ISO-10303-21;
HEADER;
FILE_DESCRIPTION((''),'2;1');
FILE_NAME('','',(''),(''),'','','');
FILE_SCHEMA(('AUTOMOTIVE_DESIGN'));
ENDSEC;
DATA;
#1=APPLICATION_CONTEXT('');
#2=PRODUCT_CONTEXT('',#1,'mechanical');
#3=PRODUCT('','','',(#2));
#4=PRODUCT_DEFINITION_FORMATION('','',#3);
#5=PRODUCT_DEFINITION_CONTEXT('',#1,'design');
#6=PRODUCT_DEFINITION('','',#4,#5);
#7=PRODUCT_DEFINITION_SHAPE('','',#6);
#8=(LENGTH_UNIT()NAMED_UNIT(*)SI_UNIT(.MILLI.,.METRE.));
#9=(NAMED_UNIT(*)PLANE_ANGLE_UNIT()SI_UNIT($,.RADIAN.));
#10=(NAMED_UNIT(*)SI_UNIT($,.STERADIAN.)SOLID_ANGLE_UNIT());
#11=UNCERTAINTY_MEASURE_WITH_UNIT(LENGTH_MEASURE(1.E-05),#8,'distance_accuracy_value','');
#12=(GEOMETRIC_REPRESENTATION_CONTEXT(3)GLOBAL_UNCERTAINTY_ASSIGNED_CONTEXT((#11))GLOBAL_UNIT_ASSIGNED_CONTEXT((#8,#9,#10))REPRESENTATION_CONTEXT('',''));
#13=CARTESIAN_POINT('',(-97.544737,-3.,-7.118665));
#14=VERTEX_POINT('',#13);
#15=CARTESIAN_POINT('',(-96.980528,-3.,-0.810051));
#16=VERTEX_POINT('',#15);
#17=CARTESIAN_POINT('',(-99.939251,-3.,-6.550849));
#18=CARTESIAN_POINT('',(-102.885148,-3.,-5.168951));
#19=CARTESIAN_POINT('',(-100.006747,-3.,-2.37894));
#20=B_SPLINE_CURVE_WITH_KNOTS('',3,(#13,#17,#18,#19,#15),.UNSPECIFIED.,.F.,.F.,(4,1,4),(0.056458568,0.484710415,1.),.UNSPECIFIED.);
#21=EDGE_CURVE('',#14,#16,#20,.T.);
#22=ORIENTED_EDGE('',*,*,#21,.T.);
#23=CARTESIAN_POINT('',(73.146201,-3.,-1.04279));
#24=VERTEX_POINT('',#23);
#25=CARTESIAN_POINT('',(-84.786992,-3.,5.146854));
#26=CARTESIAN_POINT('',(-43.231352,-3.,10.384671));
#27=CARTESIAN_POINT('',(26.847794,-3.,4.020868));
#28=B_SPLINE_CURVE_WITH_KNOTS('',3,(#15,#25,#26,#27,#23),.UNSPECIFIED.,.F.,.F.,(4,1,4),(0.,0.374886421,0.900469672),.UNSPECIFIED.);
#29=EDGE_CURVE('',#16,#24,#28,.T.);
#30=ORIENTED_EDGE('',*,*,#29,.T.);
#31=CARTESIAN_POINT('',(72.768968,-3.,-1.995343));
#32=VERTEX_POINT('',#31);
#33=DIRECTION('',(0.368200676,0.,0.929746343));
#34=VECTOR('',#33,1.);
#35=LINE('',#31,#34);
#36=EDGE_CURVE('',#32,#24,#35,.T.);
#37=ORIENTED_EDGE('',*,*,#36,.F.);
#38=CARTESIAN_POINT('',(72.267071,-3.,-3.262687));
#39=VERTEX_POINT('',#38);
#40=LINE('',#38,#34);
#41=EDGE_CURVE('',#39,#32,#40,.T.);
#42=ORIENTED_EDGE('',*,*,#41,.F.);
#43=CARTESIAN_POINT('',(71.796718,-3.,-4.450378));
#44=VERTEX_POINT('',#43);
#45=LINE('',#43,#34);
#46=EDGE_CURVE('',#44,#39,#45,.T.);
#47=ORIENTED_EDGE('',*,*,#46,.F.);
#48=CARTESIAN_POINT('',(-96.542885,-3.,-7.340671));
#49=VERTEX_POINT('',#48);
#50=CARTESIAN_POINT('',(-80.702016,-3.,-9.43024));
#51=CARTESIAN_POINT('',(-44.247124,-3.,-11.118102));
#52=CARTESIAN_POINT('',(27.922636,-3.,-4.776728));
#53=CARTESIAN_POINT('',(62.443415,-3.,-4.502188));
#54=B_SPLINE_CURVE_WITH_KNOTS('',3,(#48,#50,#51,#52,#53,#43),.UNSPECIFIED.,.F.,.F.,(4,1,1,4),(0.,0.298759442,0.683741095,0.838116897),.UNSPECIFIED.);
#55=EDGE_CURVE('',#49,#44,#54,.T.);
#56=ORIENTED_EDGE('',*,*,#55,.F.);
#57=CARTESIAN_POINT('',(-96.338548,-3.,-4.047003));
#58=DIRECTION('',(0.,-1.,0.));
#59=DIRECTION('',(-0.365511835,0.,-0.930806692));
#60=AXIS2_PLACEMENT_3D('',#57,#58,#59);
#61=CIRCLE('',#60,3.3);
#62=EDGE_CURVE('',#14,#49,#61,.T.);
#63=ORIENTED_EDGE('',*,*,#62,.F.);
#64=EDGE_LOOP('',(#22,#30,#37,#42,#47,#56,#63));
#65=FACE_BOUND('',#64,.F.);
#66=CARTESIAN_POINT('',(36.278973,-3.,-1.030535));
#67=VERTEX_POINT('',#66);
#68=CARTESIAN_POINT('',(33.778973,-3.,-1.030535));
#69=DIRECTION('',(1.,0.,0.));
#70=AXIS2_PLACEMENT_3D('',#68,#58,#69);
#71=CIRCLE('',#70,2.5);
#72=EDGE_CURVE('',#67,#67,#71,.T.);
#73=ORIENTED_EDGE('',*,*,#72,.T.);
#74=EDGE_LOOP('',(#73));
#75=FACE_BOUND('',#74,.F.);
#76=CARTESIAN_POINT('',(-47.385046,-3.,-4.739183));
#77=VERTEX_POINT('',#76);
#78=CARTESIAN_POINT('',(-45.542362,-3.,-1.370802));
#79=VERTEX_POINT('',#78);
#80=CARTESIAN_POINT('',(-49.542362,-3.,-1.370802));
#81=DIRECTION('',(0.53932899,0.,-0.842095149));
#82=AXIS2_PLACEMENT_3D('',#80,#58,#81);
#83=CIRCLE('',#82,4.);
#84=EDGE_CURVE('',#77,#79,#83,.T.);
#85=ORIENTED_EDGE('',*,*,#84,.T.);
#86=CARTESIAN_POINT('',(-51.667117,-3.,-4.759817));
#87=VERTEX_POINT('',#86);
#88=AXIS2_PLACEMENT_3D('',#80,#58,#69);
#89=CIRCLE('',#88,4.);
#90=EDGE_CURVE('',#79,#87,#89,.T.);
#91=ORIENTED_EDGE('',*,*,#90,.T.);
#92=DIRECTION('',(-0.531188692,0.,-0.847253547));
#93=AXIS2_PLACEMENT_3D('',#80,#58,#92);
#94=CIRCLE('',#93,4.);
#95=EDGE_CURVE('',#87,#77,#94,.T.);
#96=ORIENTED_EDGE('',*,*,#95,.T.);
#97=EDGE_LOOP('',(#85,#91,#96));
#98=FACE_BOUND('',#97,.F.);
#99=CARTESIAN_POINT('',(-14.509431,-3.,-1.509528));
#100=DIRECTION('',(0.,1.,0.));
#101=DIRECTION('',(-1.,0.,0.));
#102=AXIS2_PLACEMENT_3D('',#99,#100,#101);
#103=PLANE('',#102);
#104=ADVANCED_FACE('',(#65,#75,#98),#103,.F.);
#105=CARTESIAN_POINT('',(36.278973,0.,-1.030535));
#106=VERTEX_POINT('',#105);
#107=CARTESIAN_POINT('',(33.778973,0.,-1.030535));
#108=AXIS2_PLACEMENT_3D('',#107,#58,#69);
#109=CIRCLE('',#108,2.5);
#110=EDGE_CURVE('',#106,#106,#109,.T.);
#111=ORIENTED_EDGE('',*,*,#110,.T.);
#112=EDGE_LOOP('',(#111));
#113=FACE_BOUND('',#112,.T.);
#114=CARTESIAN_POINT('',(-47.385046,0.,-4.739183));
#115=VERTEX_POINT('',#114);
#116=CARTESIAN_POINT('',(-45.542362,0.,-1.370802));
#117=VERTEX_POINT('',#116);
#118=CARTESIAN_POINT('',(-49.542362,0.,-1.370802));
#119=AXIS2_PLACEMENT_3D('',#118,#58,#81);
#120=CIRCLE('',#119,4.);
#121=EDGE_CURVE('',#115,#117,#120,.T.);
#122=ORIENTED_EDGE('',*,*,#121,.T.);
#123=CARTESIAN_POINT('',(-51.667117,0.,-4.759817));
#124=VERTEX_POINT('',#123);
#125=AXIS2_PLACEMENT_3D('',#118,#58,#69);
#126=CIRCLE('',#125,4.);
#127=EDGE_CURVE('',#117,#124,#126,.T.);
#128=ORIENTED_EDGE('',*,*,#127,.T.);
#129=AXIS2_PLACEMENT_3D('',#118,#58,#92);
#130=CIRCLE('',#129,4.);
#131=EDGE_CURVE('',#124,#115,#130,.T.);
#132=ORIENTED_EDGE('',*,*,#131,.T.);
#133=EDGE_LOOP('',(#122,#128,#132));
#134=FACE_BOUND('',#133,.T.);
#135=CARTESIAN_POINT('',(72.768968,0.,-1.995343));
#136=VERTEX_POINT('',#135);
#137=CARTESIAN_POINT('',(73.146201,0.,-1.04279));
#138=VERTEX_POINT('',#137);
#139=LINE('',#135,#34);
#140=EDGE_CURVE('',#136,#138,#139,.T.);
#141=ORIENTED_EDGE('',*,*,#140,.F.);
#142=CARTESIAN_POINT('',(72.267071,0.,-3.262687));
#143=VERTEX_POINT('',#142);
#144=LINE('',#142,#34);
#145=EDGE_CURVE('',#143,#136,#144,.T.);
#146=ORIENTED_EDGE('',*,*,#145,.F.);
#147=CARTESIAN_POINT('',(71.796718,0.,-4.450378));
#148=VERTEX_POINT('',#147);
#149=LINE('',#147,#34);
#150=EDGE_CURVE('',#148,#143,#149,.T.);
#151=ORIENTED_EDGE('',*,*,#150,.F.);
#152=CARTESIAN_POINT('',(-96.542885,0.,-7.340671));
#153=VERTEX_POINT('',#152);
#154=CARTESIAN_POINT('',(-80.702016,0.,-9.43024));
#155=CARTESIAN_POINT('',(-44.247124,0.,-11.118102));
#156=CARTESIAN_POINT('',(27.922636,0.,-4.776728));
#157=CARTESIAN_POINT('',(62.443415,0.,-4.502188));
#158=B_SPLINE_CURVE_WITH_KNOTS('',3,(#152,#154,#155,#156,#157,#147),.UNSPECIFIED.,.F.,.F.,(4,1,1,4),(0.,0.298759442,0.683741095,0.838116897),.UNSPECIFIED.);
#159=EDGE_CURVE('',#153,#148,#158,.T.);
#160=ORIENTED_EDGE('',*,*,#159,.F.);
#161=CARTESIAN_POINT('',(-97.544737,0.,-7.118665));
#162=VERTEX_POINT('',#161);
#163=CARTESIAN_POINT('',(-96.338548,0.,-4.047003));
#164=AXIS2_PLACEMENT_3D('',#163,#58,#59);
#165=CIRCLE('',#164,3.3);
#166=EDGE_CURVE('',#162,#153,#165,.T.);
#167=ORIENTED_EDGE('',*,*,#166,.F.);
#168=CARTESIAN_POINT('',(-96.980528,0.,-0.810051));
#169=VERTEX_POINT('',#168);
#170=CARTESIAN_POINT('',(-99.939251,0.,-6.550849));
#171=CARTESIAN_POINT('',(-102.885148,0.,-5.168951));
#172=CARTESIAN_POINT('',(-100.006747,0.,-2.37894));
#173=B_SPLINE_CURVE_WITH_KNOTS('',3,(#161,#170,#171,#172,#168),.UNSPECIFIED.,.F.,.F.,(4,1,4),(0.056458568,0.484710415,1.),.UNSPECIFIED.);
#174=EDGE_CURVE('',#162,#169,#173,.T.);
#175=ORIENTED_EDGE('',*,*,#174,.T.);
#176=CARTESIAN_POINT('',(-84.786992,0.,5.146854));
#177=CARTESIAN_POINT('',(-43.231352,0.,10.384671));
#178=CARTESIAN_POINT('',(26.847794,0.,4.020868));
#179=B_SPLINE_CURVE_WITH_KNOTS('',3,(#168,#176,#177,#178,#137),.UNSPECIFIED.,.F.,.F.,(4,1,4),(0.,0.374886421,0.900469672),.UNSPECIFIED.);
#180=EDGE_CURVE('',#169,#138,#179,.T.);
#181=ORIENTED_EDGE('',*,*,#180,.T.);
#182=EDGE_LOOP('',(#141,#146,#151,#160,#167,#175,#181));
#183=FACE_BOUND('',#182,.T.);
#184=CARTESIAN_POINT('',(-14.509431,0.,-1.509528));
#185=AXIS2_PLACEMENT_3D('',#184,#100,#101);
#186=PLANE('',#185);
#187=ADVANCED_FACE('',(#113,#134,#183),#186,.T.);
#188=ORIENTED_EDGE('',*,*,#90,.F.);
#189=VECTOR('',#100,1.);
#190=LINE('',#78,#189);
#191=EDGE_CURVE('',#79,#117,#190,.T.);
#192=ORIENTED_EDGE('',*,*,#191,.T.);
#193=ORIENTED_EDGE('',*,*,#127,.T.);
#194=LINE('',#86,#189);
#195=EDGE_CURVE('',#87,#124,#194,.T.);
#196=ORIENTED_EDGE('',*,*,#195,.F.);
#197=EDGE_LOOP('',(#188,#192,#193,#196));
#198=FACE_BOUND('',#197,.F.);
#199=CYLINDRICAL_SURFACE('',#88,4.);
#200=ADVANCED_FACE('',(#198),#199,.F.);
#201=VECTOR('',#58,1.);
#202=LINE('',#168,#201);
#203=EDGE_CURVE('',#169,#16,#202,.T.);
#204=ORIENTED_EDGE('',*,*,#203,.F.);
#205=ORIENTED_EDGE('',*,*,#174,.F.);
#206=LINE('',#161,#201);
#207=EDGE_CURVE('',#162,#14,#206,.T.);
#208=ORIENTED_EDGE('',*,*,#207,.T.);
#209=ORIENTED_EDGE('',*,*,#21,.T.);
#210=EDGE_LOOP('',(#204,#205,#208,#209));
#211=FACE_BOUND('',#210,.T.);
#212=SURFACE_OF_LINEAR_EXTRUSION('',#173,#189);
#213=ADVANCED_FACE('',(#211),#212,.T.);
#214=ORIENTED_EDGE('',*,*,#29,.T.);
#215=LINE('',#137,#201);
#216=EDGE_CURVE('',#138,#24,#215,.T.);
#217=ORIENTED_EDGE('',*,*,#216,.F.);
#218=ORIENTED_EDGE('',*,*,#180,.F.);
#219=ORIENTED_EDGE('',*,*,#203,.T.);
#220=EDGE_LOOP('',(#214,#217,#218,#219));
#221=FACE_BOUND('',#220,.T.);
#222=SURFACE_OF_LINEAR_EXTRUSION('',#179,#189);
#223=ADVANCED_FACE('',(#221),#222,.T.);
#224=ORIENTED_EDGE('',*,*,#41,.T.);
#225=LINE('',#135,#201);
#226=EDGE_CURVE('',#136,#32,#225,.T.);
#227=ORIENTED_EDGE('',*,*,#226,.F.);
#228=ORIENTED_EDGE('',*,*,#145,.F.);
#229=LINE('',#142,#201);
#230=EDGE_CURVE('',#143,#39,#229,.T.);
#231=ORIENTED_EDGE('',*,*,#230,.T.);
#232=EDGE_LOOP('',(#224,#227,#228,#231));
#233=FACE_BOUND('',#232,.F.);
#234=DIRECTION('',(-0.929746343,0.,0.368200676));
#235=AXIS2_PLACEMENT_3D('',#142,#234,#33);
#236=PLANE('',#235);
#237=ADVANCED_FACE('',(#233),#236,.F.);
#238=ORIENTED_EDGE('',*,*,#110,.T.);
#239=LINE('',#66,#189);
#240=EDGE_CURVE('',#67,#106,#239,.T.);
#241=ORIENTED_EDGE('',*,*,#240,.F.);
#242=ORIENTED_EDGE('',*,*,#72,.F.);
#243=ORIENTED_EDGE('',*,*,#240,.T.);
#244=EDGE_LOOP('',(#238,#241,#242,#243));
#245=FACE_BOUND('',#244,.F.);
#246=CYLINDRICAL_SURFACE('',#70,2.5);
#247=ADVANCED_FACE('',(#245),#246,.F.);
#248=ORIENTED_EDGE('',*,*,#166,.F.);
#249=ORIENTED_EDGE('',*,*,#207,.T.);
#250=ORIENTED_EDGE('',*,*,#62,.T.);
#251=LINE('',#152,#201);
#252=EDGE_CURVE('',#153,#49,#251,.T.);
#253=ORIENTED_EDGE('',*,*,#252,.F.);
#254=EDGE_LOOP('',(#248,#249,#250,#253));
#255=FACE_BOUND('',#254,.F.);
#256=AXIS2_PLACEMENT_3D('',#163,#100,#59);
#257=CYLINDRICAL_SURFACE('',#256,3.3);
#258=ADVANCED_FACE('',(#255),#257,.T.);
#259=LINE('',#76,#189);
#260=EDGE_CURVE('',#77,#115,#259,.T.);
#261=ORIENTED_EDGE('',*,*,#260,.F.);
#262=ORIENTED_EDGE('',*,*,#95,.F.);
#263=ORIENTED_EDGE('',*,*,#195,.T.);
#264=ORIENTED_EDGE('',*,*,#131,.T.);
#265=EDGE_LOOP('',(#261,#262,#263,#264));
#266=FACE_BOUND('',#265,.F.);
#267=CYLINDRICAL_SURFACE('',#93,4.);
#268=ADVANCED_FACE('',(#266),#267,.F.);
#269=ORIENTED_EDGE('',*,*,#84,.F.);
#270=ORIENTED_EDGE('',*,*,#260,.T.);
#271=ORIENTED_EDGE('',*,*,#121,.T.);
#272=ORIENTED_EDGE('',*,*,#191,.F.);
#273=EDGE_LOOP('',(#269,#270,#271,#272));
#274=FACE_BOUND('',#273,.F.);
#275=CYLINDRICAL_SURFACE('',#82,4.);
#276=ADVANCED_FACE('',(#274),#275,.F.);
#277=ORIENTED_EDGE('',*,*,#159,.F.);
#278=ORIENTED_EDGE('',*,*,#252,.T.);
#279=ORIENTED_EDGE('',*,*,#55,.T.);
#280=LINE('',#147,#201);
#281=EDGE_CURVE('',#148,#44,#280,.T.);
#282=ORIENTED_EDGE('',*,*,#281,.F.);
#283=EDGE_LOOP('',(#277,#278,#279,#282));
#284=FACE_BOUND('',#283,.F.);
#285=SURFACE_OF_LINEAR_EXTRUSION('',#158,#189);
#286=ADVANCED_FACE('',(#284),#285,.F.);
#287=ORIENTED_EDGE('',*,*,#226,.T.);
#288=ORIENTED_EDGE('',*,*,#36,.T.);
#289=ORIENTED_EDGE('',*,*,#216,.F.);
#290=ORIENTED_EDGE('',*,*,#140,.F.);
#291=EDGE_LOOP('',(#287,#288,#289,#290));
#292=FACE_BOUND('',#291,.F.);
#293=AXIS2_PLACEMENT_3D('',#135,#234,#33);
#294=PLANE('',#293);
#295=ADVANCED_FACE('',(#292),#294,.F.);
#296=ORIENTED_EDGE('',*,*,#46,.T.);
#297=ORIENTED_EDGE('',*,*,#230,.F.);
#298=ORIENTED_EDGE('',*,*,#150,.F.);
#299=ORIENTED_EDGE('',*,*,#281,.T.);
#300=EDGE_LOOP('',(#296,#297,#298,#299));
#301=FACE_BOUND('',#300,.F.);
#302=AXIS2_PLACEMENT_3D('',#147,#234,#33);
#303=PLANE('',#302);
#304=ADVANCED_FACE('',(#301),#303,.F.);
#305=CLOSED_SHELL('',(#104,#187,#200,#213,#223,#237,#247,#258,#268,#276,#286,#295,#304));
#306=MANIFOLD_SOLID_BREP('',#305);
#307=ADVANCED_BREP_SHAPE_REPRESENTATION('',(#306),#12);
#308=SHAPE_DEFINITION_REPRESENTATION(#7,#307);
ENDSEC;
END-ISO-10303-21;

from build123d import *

# Parameters (mm, degrees)
F2_DEPTH = 3
F1_R     = 2.5
F3_DEPTH = 3
F4_DEPTH = 3


with BuildPart() as f2:
    # F0 (on Front) → F2 (new body)
    with BuildSketch(Plane.XZ):
        with BuildLine():
            add(Edge.make_bspline(
                [(-96.9805282175, -0.8100506688), (-84.7869920978, 5.1468541776), (-43.2313518226, 10.3846705605), (26.8477938201, 4.0208678603), (73.1462007926, -1.0427900778)],
                knots=[0, 0, 0, 0, 0.374886421, 0.9004696716, 0.9004696716, 0.9004696716, 0.9004696716], degree=3))
            add(Edge.make_bspline(
                [(-97.5447368223, -7.1186651935), (-99.939251346, -6.5508492693), (-102.885147974, -5.168950634), (-100.0067471137, -2.3789404522), (-96.9805282175, -0.8100506688)],
                knots=[0.0564585679, 0.0564585679, 0.0564585679, 0.0564585679, 0.4847104148, 1, 1, 1, 1], degree=3))
            add(Edge.make_bspline(
                [(-96.5428845142, -7.3406707446), (-96.8949965543, -7.2673488468), (-97.22905608, -7.1935231869), (-97.5447368223, -7.1186651935)],
                knots=[0, 0, 0, 0, 0.0564585679, 0.0564585679, 0.0564585679, 0.0564585679], degree=3))
            add(Edge.make_bspline(
                [(-96.5428845142, -7.3406707446), (-80.7020161693, -9.4302402111), (-44.2471235075, -11.1181020976), (27.9226364637, -4.7767282079), (62.4434148738, -4.5021877215), (71.7967184236, -4.4503783305)],
                knots=[0, 0, 0, 0, 0.2987594418, 0.6837410955, 0.8381168975, 0.8381168975, 0.8381168975, 0.8381168975], degree=3))
            Line((71.7967184236, -4.4503783305), (72.2670713195, -3.2626866351))
            add(Edge.make_bspline(
                [(-97.3825784566, -6.0471531808), (-82.3468325761, -8.841713568), (-44.2551066449, -8.6286827794), (32.5707299039, -3.8332069517), (63.1103828262, -3.2710139005), (72.2670713195, -3.2626866351)],
                knots=[0, 0, 0, 0, 0.3131273629, 0.7122131732, 0.9019797674, 0.9019797674, 0.9019797674, 0.9019797674], degree=3))
            add(Edge.make_bspline(
                [(-97.3825784566, -6.0471531808), (-98.6588937786, -5.8946130057), (-100.1661659123, -5.1778479876), (-99.9138553768, -4.2244412327), (-99.8196757147, -4.047003109)],
                knots=[0, 0, 0, 0, 0.4440177242, 0.5425000514, 0.5425000514, 0.5425000514, 0.5425000514], degree=3))
            add(Edge.make_bspline(
                [(-99.8196757147, -4.047003109), (-99.3821638101, -3.2227137691), (-97.9006497107, -2.3042858417), (-96.3385477662, -1.6362179573)],
                knots=[0.5425000514, 0.5425000514, 0.5425000514, 0.5425000514, 1, 1, 1, 1], degree=3))
            add(Edge.make_bspline(
                [(-96.3385477662, -1.6362179573), (-85.7442874691, 3.2900694446), (-41.4192830911, 9.6956733525), (28.5693195485, 2.5855104747), (72.7689680214, -1.9953434339)],
                knots=[0, 0, 0, 0, 0.384923117, 0.9441251659, 0.9441251659, 0.9441251659, 0.9441251659], degree=3))
            Line((72.7689680214, -1.9953434339), (73.1462007926, -1.0427900778))
        make_face()
        with BuildLine():
            add(Edge.make_bspline(
                [(-96.5428845142, -7.3406707446), (-96.8949965543, -7.2673488468), (-97.22905608, -7.1935231869), (-97.5447368223, -7.1186651935)],
                knots=[0, 0, 0, 0, 0.0564585679, 0.0564585679, 0.0564585679, 0.0564585679], degree=3))
            ThreePointArc((-97.5447368223, -7.1186651935), (-97.052492706, -7.2688477084), (-96.5428845142, -7.3406707446))
        make_face()
        with BuildLine():
            Line((72.2670713195, -3.2626866351), (72.7689680214, -1.9953434339))
            add(Edge.make_bspline(
                [(-96.3385477662, -1.6362179573), (-85.7442874691, 3.2900694446), (-41.4192830911, 9.6956733525), (28.5693195485, 2.5855104747), (72.7689680214, -1.9953434339)],
                knots=[0, 0, 0, 0, 0.384923117, 0.9441251659, 0.9441251659, 0.9441251659, 0.9441251659], degree=3))
            add(Edge.make_bspline(
                [(-99.8196757147, -4.047003109), (-99.3821638101, -3.2227137691), (-97.9006497107, -2.3042858417), (-96.3385477662, -1.6362179573)],
                knots=[0.5425000514, 0.5425000514, 0.5425000514, 0.5425000514, 1, 1, 1, 1], degree=3))
            add(Edge.make_bspline(
                [(-97.3825784566, -6.0471531808), (-98.6588937786, -5.8946130057), (-100.1661659123, -5.1778479876), (-99.9138553768, -4.2244412327), (-99.8196757147, -4.047003109)],
                knots=[0, 0, 0, 0, 0.4440177242, 0.5425000514, 0.5425000514, 0.5425000514, 0.5425000514], degree=3))
            add(Edge.make_bspline(
                [(-97.3825784566, -6.0471531808), (-82.3468325761, -8.841713568), (-44.2551066449, -8.6286827794), (32.5707299039, -3.8332069517), (63.1103828262, -3.2710139005), (72.2670713195, -3.2626866351)],
                knots=[0, 0, 0, 0, 0.3131273629, 0.7122131732, 0.9019797674, 0.9019797674, 0.9019797674, 0.9019797674], degree=3))
        make_face()
    extrude(amount=F2_DEPTH)


with BuildPart() as f2b:
    # F1 (on Front) → F2, piece 2 (new body)
    with BuildSketch(Plane.XZ):
        with BuildLine():
            ThreePointArc((-45.542362095, -1.3708024857), (-51.4789804014, 2.1291274472), (-51.6671168627, -4.7598166753))
            Line((-51.6671168627, -4.7598166753), (-47.385046135, -4.7391830831))
            ThreePointArc((-47.385046135, -4.7391830831), (-46.0331411102, -3.2905337378), (-45.542362095, -1.3708024857))
        make_face()
        with BuildLine():
            Line((-47.385046135, -4.7391830831), (-51.6671168627, -4.7598166753))
            ThreePointArc((-51.6671168627, -4.7598166753), (-49.523087913, -5.3707560487), (-47.385046135, -4.7391830831))
        make_face()
    extrude(amount=F2_DEPTH)


with BuildPart() as f2c:
    # F1 (on Front) → F2, piece 3 (new body)
    with BuildSketch(Plane.XZ):
        with Locations((33.7789729238, -1.0305350879)):
            Circle(F1_R)
    extrude(amount=F2_DEPTH)


with BuildPart() as f3_tool:
    # F3 (cut): a face of the model
    f3_faces = [f2b.part.faces().sort_by_distance(p)[0] for p in [
        (-49.542362095, -3, -1.3708024857),
    ]]
    extrude(f3_faces, amount=-F3_DEPTH)


with BuildPart() as f2_1:
    add(f2.part)

    # F3: cut by f3_tool
    add(f3_tool.part, mode=Mode.SUBTRACT)


with BuildPart() as f2b_1:
    add(f2b.part)

    # F3: cut by f3_tool
    add(f3_tool.part, mode=Mode.SUBTRACT)


with BuildPart() as f4_tool:
    # F4 (cut): a face of the model
    f4_faces = [f2c.part.faces().sort_by_distance(p)[0] for p in [
        (33.7789729238, -3, -1.0305350879),
    ]]
    extrude(f4_faces, amount=-F4_DEPTH)


with BuildPart() as f2_2:
    add(f2_1.part)

    # F4: cut by f4_tool
    add(f4_tool.part, mode=Mode.SUBTRACT)


with BuildPart() as f2c_1:
    add(f2c.part)

    # F4: cut by f4_tool
    add(f4_tool.part, mode=Mode.SUBTRACT)


solid = f2_2.part
